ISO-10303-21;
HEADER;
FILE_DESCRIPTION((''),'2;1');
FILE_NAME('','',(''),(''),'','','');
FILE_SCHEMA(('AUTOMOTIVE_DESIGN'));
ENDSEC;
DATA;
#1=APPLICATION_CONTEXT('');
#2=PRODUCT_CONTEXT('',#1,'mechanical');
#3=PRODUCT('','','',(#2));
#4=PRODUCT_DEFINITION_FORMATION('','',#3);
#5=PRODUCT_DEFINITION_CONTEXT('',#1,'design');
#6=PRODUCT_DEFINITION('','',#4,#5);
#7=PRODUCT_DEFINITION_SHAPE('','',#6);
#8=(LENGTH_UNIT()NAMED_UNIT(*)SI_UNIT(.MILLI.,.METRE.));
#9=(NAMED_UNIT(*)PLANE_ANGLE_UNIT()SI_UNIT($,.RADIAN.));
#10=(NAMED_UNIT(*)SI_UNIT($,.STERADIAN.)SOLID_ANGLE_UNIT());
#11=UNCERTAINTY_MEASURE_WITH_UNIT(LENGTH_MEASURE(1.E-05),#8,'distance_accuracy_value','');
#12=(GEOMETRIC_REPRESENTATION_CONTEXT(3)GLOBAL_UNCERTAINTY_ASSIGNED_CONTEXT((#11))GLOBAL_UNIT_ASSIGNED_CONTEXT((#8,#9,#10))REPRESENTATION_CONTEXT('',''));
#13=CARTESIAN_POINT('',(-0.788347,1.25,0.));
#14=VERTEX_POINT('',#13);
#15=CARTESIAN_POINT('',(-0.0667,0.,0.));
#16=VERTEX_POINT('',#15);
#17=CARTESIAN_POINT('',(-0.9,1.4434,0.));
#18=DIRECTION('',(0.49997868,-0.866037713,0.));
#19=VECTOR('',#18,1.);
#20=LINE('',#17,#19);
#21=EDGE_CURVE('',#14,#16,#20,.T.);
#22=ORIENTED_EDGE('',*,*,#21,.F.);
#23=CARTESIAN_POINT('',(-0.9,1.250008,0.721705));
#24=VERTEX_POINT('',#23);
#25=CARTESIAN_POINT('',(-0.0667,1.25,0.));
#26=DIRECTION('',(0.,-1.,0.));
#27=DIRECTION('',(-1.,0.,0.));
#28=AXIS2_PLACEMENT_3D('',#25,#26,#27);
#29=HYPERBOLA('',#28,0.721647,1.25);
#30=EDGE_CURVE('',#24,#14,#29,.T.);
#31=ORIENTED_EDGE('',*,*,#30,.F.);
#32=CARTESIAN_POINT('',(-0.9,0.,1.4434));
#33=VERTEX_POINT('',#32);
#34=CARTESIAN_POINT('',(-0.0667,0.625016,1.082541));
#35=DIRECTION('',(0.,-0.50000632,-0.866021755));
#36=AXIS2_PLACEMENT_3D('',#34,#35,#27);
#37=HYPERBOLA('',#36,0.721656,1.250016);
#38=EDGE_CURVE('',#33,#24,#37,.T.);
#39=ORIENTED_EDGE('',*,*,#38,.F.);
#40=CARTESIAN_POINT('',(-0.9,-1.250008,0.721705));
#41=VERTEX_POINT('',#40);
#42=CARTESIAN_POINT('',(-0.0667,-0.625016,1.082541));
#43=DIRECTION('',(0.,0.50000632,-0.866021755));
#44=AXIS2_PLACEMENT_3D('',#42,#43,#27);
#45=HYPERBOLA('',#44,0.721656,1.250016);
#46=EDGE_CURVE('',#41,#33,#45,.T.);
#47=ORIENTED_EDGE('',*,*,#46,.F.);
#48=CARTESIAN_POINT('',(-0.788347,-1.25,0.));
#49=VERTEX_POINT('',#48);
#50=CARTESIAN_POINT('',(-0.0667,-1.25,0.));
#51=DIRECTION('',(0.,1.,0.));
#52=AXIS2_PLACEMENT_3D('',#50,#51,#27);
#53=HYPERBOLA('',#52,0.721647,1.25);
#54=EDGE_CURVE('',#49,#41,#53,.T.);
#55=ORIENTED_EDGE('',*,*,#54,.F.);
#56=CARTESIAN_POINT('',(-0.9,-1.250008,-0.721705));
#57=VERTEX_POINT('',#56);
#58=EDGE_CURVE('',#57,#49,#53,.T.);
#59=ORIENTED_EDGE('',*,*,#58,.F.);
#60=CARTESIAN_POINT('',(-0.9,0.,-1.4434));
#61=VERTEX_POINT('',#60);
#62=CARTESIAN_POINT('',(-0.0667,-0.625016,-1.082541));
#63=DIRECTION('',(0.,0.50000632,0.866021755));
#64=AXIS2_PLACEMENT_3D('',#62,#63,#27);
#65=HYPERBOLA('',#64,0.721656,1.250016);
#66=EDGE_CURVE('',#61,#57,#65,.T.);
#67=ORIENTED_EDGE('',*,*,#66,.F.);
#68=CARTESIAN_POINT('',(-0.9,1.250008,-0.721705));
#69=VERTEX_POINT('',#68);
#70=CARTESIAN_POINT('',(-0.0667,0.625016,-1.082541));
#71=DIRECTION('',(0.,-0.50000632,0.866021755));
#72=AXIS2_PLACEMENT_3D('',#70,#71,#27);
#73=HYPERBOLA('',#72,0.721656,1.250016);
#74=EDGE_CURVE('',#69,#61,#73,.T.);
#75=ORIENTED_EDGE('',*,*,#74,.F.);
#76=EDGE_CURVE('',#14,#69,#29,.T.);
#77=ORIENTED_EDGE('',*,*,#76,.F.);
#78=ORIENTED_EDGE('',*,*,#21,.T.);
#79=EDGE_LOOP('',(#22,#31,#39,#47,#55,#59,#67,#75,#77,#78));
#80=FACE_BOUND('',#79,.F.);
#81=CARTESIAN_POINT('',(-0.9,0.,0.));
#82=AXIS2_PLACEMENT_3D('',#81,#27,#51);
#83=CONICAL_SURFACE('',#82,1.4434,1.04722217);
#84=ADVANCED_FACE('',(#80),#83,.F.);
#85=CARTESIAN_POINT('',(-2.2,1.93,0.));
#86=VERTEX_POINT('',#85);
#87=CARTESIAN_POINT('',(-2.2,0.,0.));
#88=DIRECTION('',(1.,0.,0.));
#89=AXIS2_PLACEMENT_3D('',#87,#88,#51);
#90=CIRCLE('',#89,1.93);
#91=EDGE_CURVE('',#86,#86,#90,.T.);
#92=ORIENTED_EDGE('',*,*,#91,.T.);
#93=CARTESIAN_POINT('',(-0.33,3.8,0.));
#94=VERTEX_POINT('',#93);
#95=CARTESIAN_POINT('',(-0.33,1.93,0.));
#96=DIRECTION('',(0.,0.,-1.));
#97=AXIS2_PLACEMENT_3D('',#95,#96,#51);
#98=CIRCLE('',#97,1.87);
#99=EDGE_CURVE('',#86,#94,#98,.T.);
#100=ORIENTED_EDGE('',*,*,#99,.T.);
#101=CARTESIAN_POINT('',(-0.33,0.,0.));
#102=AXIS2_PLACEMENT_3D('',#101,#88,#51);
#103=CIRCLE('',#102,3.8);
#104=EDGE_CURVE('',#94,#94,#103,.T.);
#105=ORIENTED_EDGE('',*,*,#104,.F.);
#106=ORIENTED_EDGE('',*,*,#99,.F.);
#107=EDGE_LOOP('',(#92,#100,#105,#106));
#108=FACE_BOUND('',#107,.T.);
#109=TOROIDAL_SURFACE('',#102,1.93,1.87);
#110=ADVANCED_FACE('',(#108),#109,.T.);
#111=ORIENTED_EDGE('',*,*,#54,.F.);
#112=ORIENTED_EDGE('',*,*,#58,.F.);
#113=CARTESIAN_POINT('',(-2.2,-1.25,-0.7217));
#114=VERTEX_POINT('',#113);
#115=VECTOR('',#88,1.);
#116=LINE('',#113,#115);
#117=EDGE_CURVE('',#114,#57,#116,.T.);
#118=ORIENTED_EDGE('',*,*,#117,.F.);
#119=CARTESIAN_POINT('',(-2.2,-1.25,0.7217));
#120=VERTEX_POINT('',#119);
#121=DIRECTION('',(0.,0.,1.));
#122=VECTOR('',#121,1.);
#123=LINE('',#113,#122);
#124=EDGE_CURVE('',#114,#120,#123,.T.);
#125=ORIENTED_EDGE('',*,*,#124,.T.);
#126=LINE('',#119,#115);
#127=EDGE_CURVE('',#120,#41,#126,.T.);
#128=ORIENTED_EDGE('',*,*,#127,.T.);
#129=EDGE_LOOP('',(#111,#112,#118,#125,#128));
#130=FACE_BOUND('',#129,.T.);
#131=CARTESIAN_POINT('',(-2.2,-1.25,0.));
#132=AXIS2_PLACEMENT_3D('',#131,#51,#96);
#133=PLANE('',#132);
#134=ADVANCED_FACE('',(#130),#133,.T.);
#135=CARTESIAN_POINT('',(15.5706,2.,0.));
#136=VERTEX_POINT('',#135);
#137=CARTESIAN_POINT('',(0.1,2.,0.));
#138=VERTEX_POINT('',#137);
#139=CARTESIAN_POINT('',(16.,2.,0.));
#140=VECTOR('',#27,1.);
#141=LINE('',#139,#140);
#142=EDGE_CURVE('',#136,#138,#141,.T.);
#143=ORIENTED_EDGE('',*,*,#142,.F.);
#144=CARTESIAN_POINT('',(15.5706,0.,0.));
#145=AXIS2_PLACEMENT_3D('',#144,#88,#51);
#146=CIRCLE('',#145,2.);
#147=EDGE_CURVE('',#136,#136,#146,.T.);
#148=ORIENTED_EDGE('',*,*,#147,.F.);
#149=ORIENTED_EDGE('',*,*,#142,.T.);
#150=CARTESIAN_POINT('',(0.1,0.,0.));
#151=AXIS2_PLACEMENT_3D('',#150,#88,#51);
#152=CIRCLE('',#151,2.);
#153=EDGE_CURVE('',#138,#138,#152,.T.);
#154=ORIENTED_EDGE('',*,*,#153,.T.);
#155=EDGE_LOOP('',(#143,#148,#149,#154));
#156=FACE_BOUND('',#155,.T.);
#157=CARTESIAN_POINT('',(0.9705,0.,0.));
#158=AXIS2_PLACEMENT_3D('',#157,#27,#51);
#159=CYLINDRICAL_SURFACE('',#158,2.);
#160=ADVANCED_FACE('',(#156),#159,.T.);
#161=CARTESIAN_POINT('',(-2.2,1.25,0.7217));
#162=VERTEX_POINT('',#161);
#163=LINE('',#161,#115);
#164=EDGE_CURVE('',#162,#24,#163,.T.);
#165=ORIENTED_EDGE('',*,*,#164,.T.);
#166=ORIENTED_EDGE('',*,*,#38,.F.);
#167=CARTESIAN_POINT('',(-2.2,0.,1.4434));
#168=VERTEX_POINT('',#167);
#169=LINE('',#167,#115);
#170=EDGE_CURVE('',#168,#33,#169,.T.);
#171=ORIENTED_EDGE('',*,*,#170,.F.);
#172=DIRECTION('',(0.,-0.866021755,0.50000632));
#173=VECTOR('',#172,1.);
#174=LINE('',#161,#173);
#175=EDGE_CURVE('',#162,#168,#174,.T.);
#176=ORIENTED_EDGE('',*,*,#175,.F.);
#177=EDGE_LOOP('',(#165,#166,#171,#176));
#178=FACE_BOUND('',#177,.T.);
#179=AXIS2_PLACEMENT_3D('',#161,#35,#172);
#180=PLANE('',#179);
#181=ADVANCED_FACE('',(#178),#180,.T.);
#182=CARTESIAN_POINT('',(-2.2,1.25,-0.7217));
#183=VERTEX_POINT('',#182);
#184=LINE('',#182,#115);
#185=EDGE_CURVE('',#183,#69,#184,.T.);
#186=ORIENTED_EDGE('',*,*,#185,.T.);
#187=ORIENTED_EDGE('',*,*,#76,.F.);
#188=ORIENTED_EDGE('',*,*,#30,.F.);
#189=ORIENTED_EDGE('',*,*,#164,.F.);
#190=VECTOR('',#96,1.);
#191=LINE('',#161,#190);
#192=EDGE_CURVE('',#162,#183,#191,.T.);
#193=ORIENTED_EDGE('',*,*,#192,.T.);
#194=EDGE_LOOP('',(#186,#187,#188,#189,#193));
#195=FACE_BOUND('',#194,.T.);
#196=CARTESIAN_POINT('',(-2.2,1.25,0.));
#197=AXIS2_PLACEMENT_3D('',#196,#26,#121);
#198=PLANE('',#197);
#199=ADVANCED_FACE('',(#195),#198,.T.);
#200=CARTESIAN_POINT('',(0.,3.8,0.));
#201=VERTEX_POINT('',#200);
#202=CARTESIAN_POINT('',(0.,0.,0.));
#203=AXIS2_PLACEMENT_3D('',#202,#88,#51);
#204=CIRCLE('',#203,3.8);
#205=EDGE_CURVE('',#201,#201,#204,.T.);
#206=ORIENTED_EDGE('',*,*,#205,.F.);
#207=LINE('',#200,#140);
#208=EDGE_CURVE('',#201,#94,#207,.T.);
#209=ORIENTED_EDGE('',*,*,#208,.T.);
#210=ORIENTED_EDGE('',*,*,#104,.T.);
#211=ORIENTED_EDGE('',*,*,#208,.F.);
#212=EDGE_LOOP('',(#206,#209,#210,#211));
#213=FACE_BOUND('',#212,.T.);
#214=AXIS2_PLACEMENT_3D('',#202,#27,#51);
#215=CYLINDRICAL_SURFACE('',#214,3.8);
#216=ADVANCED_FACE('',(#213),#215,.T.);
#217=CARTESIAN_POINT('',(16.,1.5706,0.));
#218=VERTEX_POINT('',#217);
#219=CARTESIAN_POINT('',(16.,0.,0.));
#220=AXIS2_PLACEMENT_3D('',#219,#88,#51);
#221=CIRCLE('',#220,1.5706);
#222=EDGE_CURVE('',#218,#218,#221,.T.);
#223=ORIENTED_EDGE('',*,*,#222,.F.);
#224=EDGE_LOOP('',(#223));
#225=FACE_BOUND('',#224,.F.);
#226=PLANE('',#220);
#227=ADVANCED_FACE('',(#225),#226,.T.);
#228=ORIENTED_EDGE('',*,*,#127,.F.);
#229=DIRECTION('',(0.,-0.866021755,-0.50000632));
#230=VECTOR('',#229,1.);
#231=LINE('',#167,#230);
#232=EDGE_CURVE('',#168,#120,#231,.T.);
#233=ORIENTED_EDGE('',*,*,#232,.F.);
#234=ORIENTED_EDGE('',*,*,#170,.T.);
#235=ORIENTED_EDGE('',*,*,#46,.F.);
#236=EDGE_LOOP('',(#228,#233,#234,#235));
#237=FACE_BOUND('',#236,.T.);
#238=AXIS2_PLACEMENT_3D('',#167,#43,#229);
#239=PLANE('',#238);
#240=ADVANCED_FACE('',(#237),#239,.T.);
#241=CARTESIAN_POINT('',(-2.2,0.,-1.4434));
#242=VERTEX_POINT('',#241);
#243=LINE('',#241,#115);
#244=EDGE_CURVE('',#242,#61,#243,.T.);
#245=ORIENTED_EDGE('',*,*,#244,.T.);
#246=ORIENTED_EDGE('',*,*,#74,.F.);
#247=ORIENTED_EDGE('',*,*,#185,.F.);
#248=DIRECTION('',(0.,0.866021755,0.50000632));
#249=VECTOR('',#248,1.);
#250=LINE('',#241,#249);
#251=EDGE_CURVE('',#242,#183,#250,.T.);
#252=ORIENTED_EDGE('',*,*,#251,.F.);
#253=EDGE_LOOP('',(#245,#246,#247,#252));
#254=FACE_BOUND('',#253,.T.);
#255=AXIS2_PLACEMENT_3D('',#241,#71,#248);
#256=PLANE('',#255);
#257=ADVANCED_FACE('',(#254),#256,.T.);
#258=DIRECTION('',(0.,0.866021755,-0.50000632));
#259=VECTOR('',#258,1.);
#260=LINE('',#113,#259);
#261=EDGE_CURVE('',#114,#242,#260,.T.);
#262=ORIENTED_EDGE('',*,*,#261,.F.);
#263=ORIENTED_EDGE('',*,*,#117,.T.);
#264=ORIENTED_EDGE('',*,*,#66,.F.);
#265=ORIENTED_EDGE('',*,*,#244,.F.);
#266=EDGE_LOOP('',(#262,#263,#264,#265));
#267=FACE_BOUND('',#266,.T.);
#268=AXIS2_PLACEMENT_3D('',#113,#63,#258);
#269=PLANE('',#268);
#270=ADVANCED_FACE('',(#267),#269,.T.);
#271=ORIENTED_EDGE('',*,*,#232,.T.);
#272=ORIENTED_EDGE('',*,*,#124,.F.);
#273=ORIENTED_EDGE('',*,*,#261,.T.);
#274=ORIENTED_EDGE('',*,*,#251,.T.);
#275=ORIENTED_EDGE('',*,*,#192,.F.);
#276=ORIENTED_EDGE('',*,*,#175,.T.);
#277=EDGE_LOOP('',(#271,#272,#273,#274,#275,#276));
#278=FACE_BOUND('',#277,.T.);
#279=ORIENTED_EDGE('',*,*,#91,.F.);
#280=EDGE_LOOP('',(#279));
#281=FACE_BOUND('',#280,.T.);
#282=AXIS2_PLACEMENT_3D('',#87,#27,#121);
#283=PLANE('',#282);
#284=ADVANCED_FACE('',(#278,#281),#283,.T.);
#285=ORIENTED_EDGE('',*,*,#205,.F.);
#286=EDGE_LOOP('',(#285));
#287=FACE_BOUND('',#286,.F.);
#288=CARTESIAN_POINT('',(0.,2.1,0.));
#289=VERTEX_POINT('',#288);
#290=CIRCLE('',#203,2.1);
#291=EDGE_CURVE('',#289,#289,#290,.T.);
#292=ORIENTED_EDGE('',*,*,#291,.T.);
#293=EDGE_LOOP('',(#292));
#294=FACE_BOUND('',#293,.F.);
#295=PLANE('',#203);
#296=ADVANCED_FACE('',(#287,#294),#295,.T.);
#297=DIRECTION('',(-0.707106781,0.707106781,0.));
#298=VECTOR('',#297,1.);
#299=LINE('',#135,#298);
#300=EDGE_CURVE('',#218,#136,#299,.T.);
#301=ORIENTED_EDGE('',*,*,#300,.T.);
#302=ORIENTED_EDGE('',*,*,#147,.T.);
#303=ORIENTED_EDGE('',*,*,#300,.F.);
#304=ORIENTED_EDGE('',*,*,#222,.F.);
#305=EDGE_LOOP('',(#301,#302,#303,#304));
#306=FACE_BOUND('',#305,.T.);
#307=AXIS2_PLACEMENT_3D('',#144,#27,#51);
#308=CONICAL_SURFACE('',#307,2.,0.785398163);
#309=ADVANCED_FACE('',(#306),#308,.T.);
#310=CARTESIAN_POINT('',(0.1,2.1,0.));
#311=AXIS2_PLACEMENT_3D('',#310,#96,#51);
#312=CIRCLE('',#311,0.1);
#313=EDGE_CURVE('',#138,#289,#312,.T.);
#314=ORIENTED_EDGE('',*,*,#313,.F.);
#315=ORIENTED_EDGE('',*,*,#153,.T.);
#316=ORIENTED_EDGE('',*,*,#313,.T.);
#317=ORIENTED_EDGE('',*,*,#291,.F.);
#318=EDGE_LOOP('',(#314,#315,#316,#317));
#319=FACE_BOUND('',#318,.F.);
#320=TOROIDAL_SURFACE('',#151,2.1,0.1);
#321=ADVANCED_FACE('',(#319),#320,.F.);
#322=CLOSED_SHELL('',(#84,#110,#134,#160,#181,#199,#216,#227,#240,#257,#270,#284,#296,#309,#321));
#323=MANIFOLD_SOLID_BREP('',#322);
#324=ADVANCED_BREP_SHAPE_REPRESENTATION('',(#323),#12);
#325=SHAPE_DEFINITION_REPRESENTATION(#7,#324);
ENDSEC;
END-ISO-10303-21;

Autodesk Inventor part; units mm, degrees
ref_plane "YZ Plane" through (0, 0, 0) normal (1, 0, 0) x (0, 1, 0)
ref_plane "XZ Plane" through (0, 0, 0) normal (0, 1, 0) x (-1, 0, 0)
sketch "Эскиз1" plane through (0, 0, 0) normal (0, 0, 1) x (1, 0, 0)
  line L0 (-0.0667, 0) -> (16, 0)
  line L1 (16, 0) -> (16, 2)
  line L2 (16, 2) -> (1.4, 2)
  line L3 (1.4, 2) -> (0.9705, 2)
  line L4 (0.9705, 2) -> (0, 2)
  line L5 (0, 2) -> (0, 3.8)
  line L6 (0, 3.8) -> (-2.2, 3.8)
  line L7 (-2.2, 3.8) -> (-2.2, 1.4434)
  line L8 (-2.2, 1.4434) -> (-0.9, 1.4434)
  line L9 (-0.9, 1.4434) -> (-0.0667, 0)
  line L10 (-5.84, 0) -> (19.64, 0) projected
  line L11 (0, -0.76) -> (0, 4.56) projected
  line L12 (1.4, 2) -> (0, 2) construction
  dimension "d1" = 14.6
  dimension "d2" = 0.4295
  dimension "d3" = 2.2
  dimension "d4" = 1.3
  dimension "d5" = 60
  dimension "d6" = 4
  dimension "d7" = 4
  dimension "d8" = 2.8868
  dimension "d9" = 7.6
  dimension "d26" = 16
revolve "Базовый элемент" add sketch "Эскиз1" angle 360 about axis through (-0.0667, 0, 0) along (1, 0, 0)
sketch "Эскиз2" plane through (-2.2, 0, 0) normal (-1, 0, 0) x (0, 0, 1)
  circle A0 centre (0, 0) radius 1.4434 projected
  line L0 (0, -5.32) -> (0, 5.32) projected
  line L1 (-5.32, 0) -> (5.32, 0) projected
  line L2 (1.4434, 0) -> (0.7217, -1.25)
  line L3 (0.7217, -1.25) -> (-0.7217, -1.25)
  line L4 (-0.7217, -1.25) -> (-1.4434, 0)
  line L5 (-1.4434, 0) -> (-0.7217, 1.25)
  line L6 (-0.7217, 1.25) -> (0.7217, 1.25)
  line L7 (0.7217, 1.25) -> (1.4434, 0)
  point P0 (0, 0)
extrude "Паз" add sketch "Эскиз2" against normal up to next contours L7 A0 | A0 L2 | L6 L0 A0 | A0 L0 L3 | L0 L6 A0 | A0 L3 L0 | L4 A0 | A0 L5
fillet "Сопряжение1" radius 1.87 1 edges at (-2.2, -3.8, 0)
thread "Резьба" size "M4x0.7" class "6g" standard "ISO Metric profile" length 14.6
chamfer "Фаска1" distance 0.4294 distance2 0.4294 1 edges at (16, -2, 0) measured on face at (16, 0.527, -0.2661)
ref_plane "Work Plane1" through (29, 0, 0) normal (0, -1, 0) x (1, 0, 0)
fillet "Fillet2" radius 0.1 1 edges at (0, -2, 0)
equation "\"d1\" = GEL"
equation "\"d3\" = KOH"
equation "\"d4\" = INTI"
equation "\"d6\" = GD"
equation "\"d7\" = BDM"
equation "\"d8\" = 1.1547 * SW"
equation "\"d9\" = KOD"
equation "\"d26\" = NLG"
equation "\"d30\" = R"
equation "\"d17\" = RR"
equation "\"d13\" = GEL"
equation "\"d15\" = -0.5 * SPD + 0.5 * GD"
equation "\"d16\" = GUL"
equation "\"GD\" = NND"
equation "\"NLG\" = 16"
equation "\"GEL\" = 14.6"
equation "\"KOD\" = 7.6"
equation "\"KOH\" = 2.2"
equation "\"INTI\" = 1.3"
equation "\"GAL\" = 0.61345 * PTC"
equation "\"GUL\" = 0.61345 * PTC"
equation "\"BDM\" = NND"
equation "\"SW\" = 2.5"
equation "\"RR\" = 1.87"
equation "\"SPD\" = 3.14117"
equation "\"R\" = 0.1"
equation "\"TOA\" = 30deg"
equation "\"GD1\" = THREADDIA - 1.2269 * PTC"
equation "\"THREADDIA\" = 4"
equation "\"PTC\" = 0.7"
equation "\"NND\" = 4"
equation "\"E0\" = 2.87"
properties part number "JIS B 1174 - M4 x 16" material "Сталь, мягкая"
